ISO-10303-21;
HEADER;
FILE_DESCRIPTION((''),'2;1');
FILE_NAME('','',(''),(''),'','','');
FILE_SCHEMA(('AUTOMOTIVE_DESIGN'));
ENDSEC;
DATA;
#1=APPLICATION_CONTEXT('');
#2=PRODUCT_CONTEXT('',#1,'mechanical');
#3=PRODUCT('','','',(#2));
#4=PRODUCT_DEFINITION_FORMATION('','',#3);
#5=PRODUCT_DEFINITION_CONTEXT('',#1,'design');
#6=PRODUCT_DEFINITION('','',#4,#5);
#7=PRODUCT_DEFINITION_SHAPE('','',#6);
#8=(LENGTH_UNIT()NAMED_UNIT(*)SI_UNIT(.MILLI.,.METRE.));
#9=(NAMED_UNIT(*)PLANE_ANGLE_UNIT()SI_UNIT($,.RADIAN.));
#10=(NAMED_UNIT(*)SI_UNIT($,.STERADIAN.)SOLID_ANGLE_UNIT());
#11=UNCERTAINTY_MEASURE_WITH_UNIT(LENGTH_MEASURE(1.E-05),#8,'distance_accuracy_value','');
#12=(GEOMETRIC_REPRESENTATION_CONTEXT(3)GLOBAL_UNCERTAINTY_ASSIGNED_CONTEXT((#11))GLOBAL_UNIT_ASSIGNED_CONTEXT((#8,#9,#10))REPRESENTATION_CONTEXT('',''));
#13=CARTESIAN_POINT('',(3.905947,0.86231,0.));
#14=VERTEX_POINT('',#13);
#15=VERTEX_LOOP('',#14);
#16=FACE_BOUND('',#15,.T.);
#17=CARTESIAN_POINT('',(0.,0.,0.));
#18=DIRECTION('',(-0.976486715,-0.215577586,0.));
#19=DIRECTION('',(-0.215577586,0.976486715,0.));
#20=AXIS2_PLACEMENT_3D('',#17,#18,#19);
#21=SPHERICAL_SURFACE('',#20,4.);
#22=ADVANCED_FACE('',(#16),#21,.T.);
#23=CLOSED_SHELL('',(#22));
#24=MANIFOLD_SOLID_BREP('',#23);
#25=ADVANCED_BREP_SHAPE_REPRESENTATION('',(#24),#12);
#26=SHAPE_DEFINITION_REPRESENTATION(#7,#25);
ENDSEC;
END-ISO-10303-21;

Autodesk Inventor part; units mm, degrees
ref_plane "YZ Plane" through (0, 0, 0) normal (1, 0, 0) x (0, 1, 0)
ref_plane "XZ Plane" through (0, 0, 0) normal (0, 1, 0) x (-1, 0, 0)
ref_plane "XY Plane" through (0, 0, 0) normal (0, 0, 1) x (1, 0, 0)
sketch "Эскиз1" plane through (0, 0, 0) normal (0, 0, 1) x (1, 0, 0)
  circle A0 centre (0, 0) radius 4
  line L0 (3.9059, 0.8623) -> (-3.9059, -0.8623)
  dimension "d0" = 8
revolve "Вращение1" add sketch "Эскиз1" angle 360 about axis through (3.9059, 0.8623, 0) along (-0.9764845, -0.2155875, 0) picked at (-0.1284, 1.3271) contours L0 A0
properties part number "Шар подшипника"
